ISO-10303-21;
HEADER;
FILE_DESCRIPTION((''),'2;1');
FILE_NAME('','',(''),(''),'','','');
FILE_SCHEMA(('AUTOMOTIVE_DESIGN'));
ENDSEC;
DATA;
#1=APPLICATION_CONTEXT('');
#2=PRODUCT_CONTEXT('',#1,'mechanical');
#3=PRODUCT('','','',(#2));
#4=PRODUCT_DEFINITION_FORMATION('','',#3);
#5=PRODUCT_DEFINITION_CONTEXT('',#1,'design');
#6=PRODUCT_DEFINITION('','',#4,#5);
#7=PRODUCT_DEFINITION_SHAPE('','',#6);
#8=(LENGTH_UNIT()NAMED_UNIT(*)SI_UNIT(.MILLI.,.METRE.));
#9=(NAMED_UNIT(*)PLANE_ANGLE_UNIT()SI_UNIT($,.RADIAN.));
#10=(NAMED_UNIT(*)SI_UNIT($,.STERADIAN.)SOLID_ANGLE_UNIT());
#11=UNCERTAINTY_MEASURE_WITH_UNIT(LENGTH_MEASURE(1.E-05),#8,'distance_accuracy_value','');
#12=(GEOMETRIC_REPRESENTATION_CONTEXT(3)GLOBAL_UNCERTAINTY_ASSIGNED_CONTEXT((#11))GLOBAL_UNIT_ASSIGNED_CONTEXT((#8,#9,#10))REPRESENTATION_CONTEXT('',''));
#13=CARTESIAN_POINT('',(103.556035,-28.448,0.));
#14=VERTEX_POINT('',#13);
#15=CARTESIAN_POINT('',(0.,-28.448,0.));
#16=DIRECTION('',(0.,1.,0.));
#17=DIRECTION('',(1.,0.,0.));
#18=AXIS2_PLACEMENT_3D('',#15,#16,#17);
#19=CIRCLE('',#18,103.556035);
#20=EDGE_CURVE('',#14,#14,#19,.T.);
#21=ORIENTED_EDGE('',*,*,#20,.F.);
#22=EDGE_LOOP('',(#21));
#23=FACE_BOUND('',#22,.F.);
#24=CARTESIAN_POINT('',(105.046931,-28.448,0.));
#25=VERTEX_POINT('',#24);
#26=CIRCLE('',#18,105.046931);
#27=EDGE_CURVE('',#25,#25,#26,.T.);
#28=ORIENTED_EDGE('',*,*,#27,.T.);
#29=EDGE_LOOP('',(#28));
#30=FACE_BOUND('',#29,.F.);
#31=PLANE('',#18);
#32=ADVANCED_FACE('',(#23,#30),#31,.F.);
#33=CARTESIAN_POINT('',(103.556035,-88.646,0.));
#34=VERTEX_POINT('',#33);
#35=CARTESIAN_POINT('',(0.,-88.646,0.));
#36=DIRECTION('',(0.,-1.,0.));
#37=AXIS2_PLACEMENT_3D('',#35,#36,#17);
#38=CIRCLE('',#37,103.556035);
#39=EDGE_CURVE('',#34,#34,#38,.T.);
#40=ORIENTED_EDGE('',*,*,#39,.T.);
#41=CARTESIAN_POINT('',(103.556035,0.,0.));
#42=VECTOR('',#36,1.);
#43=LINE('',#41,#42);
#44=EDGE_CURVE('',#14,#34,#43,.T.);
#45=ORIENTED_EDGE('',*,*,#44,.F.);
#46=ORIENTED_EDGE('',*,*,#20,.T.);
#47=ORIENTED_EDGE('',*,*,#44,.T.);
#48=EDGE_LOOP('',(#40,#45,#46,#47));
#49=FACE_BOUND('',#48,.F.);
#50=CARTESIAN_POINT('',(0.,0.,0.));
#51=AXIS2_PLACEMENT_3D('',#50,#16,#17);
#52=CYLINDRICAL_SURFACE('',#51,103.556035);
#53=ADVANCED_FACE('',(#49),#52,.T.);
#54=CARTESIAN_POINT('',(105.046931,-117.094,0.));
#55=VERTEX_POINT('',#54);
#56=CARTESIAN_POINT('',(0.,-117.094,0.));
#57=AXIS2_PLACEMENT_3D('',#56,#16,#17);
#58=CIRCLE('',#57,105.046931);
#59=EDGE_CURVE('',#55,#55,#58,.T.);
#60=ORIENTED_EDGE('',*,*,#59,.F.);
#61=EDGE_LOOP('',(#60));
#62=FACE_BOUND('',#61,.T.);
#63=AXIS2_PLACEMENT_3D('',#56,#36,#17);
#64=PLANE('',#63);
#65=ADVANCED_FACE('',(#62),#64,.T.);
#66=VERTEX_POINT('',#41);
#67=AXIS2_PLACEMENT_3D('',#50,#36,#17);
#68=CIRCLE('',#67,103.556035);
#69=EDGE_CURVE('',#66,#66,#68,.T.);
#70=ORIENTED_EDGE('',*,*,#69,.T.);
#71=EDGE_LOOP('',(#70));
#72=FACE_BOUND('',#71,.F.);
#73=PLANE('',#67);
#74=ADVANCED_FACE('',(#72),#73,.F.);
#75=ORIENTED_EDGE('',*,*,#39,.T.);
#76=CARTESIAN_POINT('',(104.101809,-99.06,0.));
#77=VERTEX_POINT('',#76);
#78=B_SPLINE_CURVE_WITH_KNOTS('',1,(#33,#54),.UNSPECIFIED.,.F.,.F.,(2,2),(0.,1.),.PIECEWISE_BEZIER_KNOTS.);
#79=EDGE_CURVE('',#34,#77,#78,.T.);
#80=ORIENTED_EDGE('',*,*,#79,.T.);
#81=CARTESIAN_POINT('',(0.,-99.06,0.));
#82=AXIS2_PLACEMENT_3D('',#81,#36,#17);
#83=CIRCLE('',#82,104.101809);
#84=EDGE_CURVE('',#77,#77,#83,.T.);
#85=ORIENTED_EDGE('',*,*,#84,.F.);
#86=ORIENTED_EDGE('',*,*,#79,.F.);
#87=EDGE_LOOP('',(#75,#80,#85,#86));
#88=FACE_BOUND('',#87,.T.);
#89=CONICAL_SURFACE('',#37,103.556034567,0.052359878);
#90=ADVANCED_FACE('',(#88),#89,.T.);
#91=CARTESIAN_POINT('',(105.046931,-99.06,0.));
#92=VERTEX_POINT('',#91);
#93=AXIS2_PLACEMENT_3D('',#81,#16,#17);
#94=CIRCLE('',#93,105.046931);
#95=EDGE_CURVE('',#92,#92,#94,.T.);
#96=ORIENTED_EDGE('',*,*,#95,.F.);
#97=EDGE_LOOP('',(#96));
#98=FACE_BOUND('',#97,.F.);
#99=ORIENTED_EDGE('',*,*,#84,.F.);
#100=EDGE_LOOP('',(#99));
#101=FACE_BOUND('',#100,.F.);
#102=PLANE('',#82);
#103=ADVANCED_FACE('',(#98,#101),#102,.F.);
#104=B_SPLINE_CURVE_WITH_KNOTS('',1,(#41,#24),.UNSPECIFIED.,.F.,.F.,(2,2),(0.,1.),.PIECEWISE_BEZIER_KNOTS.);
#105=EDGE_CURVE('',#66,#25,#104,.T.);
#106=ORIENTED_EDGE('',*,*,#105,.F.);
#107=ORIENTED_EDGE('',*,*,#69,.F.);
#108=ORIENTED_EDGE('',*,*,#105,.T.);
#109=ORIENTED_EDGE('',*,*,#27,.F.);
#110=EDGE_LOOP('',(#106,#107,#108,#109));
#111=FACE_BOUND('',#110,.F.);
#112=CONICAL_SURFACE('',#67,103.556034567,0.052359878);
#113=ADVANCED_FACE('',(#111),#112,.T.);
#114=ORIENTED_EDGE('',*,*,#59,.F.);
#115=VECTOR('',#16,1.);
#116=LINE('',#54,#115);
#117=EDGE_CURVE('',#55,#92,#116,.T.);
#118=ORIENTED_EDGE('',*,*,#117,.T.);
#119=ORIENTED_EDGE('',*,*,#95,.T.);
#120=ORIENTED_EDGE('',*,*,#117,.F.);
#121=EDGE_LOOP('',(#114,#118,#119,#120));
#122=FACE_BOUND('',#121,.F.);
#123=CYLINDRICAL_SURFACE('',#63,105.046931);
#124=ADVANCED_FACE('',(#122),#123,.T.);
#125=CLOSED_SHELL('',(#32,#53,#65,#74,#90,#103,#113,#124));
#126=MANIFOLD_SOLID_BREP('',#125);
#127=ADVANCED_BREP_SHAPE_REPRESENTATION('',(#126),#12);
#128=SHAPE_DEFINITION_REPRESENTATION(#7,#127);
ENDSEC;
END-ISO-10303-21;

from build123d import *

# Parameters (mm, degrees)
F0_R       = 103.556034567
F1_DEPTH   = 88.646
F1_FACE_R  = 103.556034567
F1_FACE1_R = 103.556034567
F3_DEPTH   = 28.448
F3_TAPER   = -3
F4_DEPTH   = 18.034


# Not quite as in the source:
# - a feature names something its author has since deleted; it is built from what else it names


with BuildPart() as f1:
    # F0 (on Front) → F1 (new body)
    with BuildSketch(Plane.XZ):
        Circle(F0_R)
    extrude(amount=F1_DEPTH)

    # F1_face (on face) + F1_face1 (on face) → F3 (join)
    with BuildSketch(Plane.XZ.offset(88.646)):
        Circle(F1_FACE_R)
    with BuildSketch(Plane(origin=(0, 0, 0), x_dir=(1, 0, 0), z_dir=(0, 1, 0))):
        Circle(F1_FACE1_R)
    extrude(amount=F3_DEPTH, taper=F3_TAPER, dir=(0, -1, 0))

    # F4 (add): a face of the model
    f4_faces = [f1.faces().sort_by_distance(p)[0] for p in [
        (0, -117.094, 0),
    ]]
    extrude(f4_faces, amount=-F4_DEPTH)


solid = f1.part
